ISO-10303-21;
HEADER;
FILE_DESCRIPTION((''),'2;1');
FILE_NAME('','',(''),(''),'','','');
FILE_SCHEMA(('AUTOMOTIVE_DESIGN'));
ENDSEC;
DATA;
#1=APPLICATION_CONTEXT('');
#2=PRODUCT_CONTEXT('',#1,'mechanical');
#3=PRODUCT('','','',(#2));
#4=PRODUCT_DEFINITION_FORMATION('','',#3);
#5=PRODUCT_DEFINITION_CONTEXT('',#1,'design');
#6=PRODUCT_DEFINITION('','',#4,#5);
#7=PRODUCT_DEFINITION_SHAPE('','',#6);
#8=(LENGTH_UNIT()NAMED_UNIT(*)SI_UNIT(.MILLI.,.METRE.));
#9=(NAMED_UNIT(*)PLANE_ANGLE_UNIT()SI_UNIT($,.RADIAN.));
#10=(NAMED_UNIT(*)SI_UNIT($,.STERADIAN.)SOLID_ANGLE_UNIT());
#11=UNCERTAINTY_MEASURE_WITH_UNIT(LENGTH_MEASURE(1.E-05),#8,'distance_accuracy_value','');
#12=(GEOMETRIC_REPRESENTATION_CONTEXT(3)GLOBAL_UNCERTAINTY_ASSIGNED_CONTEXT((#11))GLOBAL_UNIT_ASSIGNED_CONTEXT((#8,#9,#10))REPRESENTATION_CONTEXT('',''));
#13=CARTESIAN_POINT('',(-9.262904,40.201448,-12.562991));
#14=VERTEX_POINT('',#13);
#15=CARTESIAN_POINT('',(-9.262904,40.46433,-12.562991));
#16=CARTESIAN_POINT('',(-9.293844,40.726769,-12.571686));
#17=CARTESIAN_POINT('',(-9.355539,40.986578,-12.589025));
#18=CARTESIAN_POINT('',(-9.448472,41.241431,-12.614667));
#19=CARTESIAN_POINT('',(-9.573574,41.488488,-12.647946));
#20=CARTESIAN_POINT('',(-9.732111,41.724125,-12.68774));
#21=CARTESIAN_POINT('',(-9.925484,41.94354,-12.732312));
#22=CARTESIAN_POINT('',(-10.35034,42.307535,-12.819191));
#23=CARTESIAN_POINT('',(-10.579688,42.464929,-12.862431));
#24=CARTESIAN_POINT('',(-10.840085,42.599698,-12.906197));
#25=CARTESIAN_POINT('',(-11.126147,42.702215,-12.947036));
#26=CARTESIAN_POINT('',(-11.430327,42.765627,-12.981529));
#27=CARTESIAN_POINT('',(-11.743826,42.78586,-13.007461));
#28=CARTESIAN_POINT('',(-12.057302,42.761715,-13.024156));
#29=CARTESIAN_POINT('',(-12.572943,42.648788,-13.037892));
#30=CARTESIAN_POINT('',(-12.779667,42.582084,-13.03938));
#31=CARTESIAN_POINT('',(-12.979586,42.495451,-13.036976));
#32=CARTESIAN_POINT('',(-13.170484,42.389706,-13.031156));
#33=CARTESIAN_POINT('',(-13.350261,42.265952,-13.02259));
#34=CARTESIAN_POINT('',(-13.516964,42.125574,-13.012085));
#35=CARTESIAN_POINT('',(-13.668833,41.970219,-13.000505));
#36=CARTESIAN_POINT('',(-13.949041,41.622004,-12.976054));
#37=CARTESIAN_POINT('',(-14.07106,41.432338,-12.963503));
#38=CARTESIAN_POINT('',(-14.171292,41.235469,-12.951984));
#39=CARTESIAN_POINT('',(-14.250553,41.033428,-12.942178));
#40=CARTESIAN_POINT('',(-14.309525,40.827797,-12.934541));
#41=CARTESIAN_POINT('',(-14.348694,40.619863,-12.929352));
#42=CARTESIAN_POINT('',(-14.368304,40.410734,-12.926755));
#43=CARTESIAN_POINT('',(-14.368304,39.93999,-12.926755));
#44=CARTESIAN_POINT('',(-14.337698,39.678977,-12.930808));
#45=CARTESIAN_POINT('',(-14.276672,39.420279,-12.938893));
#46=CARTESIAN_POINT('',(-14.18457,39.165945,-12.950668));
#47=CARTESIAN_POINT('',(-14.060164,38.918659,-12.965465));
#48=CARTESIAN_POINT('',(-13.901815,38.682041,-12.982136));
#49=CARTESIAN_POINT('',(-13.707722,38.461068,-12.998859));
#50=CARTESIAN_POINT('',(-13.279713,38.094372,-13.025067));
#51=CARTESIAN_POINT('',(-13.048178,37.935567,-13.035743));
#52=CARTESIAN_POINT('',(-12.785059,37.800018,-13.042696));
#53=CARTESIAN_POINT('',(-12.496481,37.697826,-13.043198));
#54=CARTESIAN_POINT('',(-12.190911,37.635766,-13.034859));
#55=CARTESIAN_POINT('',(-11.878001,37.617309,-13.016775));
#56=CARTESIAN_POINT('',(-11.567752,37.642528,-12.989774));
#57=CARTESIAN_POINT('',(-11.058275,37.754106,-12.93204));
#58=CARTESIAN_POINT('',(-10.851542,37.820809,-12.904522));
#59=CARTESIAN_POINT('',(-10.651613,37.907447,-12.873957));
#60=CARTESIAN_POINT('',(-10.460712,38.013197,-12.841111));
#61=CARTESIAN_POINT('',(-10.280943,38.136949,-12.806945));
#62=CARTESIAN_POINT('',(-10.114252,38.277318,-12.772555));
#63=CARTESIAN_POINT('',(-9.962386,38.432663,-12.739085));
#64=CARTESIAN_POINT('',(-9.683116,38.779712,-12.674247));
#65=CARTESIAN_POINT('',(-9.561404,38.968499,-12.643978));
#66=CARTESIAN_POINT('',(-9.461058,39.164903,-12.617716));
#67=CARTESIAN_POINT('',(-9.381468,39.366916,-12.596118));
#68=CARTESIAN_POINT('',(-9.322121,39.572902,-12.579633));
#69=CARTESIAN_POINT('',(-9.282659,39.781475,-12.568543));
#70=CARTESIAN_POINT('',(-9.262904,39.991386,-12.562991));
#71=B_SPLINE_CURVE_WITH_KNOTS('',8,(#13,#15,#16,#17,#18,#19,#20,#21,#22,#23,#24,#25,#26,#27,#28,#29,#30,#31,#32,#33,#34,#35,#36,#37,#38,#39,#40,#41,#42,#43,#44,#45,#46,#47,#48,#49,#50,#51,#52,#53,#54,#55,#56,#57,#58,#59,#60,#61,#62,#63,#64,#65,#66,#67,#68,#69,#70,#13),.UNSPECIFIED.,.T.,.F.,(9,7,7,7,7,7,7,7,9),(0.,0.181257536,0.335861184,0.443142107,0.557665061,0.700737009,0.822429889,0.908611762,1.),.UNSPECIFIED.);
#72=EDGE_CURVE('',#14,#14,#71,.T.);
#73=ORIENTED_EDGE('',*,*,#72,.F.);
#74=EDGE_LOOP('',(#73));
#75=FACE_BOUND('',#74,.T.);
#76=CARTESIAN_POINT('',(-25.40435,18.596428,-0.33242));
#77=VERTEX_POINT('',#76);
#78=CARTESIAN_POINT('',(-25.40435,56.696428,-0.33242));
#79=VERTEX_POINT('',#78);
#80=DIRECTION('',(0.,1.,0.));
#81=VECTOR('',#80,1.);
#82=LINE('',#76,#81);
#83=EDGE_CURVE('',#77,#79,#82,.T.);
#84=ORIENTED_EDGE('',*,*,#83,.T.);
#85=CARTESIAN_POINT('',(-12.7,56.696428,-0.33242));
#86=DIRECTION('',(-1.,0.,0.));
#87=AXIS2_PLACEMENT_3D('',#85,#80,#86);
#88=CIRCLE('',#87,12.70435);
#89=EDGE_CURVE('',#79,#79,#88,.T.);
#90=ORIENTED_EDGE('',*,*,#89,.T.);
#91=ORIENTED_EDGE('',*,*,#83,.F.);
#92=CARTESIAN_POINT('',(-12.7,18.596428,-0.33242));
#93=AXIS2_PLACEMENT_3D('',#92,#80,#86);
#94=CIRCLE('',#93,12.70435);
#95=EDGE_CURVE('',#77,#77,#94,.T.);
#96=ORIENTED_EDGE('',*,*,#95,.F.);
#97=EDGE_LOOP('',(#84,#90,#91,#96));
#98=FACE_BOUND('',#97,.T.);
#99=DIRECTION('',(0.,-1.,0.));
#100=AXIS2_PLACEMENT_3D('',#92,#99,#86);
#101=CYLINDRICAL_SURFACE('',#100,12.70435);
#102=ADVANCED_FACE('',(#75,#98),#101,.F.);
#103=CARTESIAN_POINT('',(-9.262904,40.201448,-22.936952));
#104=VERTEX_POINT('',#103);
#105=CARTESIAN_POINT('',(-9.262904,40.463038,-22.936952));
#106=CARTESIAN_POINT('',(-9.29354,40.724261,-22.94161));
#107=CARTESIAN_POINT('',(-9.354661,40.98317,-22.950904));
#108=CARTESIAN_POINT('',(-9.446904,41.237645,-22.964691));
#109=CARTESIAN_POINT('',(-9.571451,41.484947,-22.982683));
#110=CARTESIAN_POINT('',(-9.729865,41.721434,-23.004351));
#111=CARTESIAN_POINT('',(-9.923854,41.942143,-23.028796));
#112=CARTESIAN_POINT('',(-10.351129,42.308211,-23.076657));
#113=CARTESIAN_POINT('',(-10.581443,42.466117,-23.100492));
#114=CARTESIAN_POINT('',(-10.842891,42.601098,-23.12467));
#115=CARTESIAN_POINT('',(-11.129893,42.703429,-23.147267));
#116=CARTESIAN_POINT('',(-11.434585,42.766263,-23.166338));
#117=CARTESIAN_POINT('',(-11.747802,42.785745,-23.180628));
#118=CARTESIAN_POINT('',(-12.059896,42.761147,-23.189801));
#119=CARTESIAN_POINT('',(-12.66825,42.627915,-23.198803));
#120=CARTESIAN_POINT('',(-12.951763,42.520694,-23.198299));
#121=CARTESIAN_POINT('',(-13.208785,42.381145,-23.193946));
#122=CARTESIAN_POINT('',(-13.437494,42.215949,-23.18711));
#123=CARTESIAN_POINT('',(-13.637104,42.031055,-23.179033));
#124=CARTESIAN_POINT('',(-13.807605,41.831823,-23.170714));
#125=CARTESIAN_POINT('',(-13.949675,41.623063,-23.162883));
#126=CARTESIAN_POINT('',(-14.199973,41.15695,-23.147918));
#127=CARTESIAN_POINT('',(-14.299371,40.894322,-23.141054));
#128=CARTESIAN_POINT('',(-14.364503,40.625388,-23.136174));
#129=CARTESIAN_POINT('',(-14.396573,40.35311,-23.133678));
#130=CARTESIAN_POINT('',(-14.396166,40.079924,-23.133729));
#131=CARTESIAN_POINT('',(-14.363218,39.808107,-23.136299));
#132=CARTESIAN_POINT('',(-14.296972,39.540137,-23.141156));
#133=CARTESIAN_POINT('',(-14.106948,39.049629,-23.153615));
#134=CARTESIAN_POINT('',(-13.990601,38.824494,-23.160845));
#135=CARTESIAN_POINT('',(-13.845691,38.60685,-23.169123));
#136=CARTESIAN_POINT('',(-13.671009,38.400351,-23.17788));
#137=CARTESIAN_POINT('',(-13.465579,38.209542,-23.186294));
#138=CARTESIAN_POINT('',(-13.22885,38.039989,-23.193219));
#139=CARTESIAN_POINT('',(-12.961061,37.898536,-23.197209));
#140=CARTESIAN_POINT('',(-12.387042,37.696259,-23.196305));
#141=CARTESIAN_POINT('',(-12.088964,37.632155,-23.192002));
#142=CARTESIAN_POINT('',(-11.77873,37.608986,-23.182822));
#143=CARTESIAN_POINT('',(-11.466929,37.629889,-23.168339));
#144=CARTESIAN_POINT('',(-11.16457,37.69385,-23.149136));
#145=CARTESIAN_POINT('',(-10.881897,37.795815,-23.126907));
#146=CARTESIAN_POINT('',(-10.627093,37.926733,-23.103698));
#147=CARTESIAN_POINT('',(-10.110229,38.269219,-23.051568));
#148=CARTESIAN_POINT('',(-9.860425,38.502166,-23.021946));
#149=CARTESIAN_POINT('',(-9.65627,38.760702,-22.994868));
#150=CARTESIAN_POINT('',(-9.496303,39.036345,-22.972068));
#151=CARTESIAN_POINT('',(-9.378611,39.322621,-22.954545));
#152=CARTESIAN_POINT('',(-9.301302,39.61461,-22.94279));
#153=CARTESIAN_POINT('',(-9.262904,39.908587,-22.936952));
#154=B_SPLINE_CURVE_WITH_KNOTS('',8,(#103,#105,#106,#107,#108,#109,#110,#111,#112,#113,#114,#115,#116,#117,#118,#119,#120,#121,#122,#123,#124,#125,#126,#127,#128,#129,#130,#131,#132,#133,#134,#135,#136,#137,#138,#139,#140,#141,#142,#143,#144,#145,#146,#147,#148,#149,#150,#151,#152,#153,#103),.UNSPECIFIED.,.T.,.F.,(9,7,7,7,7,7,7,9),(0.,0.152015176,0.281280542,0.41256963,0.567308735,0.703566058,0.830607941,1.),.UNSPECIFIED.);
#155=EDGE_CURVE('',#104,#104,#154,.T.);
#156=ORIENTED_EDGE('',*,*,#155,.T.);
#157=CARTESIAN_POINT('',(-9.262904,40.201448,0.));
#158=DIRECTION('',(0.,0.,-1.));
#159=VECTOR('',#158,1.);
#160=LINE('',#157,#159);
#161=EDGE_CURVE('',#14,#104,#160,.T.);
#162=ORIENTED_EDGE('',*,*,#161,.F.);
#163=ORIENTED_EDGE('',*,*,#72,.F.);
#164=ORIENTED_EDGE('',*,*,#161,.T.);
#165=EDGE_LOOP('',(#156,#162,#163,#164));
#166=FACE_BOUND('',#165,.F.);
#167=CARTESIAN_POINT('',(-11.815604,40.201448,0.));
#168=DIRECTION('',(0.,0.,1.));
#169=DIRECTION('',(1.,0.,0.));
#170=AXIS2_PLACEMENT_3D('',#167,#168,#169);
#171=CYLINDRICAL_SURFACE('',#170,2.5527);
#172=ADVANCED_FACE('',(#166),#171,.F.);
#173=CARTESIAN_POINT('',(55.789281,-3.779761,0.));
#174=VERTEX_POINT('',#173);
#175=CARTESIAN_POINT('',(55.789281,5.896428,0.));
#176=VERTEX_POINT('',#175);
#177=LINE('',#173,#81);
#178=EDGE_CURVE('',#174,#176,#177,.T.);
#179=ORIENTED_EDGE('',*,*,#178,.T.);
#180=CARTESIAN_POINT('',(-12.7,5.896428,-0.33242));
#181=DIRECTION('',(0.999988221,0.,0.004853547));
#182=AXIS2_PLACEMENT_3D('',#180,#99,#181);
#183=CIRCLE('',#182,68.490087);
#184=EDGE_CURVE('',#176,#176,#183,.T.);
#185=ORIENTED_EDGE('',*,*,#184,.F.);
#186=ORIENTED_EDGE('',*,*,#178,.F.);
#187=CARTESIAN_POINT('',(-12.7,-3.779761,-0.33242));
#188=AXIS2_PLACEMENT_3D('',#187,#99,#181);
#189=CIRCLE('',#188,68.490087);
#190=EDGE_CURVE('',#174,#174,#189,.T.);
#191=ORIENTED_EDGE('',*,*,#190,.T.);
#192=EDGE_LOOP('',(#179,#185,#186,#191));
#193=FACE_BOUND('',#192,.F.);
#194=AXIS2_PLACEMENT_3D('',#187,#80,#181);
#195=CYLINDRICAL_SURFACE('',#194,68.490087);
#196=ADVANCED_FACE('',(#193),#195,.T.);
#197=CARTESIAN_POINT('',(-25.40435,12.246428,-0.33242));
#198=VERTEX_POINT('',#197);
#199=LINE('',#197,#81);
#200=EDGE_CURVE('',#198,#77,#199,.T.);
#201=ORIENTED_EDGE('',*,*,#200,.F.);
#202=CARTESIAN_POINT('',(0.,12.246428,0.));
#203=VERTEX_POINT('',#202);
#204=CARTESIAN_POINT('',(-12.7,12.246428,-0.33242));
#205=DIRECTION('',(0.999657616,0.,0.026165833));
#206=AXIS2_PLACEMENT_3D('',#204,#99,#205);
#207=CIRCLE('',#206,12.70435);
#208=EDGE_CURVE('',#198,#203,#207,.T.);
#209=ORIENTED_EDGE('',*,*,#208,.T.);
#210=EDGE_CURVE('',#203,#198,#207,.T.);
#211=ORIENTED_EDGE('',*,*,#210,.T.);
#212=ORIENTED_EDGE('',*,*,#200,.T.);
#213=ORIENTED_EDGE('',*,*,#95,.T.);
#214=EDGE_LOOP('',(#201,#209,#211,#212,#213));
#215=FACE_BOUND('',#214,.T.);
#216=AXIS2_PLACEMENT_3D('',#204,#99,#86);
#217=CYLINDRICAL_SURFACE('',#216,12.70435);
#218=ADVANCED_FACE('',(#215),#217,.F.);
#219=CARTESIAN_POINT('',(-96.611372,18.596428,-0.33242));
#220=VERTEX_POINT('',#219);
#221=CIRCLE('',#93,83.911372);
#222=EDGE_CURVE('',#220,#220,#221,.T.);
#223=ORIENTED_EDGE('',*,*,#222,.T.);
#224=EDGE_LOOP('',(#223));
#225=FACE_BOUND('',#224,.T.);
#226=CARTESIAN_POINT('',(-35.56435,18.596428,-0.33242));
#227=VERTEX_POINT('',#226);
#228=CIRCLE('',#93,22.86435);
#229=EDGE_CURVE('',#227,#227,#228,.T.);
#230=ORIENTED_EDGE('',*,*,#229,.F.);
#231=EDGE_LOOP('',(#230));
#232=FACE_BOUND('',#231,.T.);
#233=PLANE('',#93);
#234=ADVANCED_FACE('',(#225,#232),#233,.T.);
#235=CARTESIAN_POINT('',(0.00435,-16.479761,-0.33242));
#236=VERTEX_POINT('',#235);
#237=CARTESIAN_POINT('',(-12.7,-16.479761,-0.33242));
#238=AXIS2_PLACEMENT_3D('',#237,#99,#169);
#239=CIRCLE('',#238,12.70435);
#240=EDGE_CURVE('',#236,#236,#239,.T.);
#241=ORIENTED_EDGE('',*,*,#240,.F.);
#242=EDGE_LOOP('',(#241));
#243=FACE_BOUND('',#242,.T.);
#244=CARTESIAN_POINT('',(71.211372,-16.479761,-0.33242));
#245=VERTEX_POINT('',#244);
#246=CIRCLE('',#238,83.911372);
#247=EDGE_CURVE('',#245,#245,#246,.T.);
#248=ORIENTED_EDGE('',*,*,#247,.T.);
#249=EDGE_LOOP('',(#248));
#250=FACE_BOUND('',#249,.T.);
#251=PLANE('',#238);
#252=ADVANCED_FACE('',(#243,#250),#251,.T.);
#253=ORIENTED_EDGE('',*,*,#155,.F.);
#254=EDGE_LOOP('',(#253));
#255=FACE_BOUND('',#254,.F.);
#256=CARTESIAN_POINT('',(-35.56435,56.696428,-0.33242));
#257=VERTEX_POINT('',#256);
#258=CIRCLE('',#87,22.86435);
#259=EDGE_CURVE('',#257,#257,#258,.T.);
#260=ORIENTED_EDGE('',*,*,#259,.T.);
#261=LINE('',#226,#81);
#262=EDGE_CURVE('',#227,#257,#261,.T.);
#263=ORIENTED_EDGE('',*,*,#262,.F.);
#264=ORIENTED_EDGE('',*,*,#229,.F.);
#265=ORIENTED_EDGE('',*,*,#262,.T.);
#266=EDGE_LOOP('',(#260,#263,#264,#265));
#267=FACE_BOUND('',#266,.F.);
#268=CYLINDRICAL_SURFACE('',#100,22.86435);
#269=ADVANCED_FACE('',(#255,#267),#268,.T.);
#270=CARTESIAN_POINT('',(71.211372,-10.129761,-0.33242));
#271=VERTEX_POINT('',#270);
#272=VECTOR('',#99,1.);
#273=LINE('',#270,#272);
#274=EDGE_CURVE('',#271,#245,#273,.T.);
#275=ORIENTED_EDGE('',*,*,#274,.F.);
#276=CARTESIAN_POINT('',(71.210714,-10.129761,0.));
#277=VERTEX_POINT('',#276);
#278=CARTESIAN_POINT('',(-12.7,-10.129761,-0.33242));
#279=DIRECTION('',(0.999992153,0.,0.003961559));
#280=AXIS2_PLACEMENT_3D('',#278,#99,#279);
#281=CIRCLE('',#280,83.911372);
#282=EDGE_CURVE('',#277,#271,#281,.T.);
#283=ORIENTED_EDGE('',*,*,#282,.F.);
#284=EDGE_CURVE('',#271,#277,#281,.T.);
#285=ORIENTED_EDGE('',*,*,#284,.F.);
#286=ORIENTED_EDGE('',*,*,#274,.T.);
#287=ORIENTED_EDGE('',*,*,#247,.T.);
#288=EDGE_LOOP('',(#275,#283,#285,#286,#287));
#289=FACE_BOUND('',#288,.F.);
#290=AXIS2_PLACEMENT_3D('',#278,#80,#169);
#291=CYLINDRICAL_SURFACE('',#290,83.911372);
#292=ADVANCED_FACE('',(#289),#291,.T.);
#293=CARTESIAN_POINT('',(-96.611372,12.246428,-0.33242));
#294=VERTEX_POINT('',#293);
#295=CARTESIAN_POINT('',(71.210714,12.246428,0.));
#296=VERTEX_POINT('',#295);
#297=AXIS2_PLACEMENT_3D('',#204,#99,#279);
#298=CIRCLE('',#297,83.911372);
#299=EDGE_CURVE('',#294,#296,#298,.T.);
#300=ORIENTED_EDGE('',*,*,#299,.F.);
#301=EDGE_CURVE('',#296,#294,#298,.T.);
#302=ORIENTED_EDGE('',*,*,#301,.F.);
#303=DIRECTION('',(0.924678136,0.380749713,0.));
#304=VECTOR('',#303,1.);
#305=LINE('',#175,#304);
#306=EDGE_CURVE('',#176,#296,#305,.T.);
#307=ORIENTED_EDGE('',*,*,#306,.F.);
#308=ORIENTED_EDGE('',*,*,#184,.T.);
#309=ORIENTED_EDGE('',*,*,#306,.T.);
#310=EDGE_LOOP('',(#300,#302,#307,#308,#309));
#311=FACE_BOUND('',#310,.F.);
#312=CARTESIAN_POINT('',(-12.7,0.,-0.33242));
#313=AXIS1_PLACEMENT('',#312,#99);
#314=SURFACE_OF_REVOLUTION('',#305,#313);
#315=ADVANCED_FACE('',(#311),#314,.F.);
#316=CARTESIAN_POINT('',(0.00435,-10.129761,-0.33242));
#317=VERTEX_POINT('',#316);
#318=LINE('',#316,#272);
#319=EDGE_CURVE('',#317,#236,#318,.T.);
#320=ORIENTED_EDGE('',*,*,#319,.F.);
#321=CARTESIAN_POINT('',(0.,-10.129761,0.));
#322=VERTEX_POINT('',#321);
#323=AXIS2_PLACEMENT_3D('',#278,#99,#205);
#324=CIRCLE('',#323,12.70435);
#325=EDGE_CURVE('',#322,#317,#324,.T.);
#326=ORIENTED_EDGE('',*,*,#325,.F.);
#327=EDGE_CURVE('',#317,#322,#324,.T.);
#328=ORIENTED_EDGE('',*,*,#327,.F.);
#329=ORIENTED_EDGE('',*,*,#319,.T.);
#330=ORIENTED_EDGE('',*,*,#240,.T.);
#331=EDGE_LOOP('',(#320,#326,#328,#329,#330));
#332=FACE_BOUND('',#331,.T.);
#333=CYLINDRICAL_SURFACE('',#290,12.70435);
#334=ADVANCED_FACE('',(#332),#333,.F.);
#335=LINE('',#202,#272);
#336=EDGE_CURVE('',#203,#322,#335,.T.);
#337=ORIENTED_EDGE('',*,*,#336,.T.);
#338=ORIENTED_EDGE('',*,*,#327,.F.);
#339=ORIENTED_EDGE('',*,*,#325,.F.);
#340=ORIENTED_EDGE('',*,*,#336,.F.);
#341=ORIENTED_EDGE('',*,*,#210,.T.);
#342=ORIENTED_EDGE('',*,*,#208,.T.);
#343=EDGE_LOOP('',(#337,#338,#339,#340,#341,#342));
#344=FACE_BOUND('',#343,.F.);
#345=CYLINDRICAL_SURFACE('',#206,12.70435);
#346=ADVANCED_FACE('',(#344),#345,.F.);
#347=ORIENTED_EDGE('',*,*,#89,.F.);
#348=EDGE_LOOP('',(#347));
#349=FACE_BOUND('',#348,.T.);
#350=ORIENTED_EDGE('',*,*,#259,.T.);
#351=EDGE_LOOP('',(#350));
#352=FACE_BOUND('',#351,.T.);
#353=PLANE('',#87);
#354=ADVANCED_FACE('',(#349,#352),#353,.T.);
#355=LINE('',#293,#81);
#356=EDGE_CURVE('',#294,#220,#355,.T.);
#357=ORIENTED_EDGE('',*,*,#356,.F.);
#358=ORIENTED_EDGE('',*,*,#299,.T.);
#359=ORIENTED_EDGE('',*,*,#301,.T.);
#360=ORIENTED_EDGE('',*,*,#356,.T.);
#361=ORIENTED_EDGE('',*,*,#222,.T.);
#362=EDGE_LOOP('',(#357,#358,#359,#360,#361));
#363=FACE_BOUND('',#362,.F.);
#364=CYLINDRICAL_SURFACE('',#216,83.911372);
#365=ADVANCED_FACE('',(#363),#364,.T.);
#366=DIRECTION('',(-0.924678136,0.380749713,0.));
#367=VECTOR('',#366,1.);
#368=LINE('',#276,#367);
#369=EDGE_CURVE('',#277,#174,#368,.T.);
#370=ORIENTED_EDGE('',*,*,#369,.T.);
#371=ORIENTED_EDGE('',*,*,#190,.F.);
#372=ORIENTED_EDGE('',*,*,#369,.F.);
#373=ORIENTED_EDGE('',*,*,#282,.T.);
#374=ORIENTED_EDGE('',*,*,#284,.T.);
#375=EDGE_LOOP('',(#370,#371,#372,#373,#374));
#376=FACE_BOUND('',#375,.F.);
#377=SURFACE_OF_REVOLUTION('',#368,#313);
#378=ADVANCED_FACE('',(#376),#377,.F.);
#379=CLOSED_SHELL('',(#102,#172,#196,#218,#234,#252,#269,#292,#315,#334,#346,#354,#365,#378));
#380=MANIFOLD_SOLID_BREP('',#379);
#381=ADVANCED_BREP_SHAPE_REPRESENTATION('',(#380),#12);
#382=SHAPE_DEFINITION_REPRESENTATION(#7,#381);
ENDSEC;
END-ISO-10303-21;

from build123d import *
from build123d import SkipClean  # not in build123d's __all__

# Parameters (mm, degrees)
F2_FACE_R    = 83.9113721036
F2_FACE_R_2  = 12.7043497663
F3_DEPTH     = 6.35
F2_FACE1_R   = 83.9113721036
F2_FACE1_R_2 = 12.7043497663
F4_DEPTH     = 6.35
F5_R         = 22.8643497663
F5_R_2       = 12.7043497663
F6_DEPTH     = 38.1
F8_D         = 5.1054
F8_DEPTH     = 84.2447919947


# Not quite as in the source:
# - after a boolean that leaves OpenCascade's solid faulty, fix() repairs it


with BuildPart() as f2:
    # F0 (on Top) → F2 (revolve)
    with BuildSketch(Plane.XY):
        Polygon((71.2107136504, 12.2464282371), (0, 12.2464282371), (0, -10.1297611803), (71.2107136504, -10.1297611803), (55.7892807321, -3.7797611803), (55.7892807321, 5.8964282371), align=None)
    revolve(axis=Axis((-12.7, 0, -0.3324198911), (0, -1, 0)))

    # F2_face (on face) → F3 (join)
    with BuildSketch(Plane(origin=(-12.7, 12.2464282371, -0.3324198911), x_dir=(-1, 0, 0), z_dir=(0, 1, 0))):
        Circle(F2_FACE_R)
        Circle(F2_FACE_R_2, mode=Mode.SUBTRACT)
    with SkipClean():  # cleaning this boolean's faces spoils the solid; the shape is the same uncleaned
        extrude(amount=F3_DEPTH)

    # F2_face1 (on face) → F4 (join)
    with BuildSketch(Plane(origin=(-12.7, -10.1297611803, -0.3324198911), x_dir=(1, 0, 0), z_dir=(0, -1, 0))):
        Circle(F2_FACE1_R)
        Circle(F2_FACE1_R_2, mode=Mode.SUBTRACT)
    extrude(amount=F4_DEPTH)

    add(f2.part.fix(), mode=Mode.REPLACE)

    # F5 (on face) → F6 (join)
    with BuildSketch(Plane(origin=(0, 18.5964282371, 0), x_dir=(-1, 0, 0), z_dir=(0, 1, 0))):
        with Locations((12.7, -0.3324198911)):
            Circle(F5_R)
        with Locations((12.7, -0.3324198911)):
            Circle(F5_R_2, mode=Mode.SUBTRACT)
    extrude(amount=F6_DEPTH)

    # F8 (through all, one way)
    with BuildSketch(Plane.XY):
        with Locations((-11.8156038225, 40.2014479041)):
            Circle(F8_D / 2)
    extrude(amount=-F8_DEPTH, mode=Mode.SUBTRACT)


solid = f2.part
